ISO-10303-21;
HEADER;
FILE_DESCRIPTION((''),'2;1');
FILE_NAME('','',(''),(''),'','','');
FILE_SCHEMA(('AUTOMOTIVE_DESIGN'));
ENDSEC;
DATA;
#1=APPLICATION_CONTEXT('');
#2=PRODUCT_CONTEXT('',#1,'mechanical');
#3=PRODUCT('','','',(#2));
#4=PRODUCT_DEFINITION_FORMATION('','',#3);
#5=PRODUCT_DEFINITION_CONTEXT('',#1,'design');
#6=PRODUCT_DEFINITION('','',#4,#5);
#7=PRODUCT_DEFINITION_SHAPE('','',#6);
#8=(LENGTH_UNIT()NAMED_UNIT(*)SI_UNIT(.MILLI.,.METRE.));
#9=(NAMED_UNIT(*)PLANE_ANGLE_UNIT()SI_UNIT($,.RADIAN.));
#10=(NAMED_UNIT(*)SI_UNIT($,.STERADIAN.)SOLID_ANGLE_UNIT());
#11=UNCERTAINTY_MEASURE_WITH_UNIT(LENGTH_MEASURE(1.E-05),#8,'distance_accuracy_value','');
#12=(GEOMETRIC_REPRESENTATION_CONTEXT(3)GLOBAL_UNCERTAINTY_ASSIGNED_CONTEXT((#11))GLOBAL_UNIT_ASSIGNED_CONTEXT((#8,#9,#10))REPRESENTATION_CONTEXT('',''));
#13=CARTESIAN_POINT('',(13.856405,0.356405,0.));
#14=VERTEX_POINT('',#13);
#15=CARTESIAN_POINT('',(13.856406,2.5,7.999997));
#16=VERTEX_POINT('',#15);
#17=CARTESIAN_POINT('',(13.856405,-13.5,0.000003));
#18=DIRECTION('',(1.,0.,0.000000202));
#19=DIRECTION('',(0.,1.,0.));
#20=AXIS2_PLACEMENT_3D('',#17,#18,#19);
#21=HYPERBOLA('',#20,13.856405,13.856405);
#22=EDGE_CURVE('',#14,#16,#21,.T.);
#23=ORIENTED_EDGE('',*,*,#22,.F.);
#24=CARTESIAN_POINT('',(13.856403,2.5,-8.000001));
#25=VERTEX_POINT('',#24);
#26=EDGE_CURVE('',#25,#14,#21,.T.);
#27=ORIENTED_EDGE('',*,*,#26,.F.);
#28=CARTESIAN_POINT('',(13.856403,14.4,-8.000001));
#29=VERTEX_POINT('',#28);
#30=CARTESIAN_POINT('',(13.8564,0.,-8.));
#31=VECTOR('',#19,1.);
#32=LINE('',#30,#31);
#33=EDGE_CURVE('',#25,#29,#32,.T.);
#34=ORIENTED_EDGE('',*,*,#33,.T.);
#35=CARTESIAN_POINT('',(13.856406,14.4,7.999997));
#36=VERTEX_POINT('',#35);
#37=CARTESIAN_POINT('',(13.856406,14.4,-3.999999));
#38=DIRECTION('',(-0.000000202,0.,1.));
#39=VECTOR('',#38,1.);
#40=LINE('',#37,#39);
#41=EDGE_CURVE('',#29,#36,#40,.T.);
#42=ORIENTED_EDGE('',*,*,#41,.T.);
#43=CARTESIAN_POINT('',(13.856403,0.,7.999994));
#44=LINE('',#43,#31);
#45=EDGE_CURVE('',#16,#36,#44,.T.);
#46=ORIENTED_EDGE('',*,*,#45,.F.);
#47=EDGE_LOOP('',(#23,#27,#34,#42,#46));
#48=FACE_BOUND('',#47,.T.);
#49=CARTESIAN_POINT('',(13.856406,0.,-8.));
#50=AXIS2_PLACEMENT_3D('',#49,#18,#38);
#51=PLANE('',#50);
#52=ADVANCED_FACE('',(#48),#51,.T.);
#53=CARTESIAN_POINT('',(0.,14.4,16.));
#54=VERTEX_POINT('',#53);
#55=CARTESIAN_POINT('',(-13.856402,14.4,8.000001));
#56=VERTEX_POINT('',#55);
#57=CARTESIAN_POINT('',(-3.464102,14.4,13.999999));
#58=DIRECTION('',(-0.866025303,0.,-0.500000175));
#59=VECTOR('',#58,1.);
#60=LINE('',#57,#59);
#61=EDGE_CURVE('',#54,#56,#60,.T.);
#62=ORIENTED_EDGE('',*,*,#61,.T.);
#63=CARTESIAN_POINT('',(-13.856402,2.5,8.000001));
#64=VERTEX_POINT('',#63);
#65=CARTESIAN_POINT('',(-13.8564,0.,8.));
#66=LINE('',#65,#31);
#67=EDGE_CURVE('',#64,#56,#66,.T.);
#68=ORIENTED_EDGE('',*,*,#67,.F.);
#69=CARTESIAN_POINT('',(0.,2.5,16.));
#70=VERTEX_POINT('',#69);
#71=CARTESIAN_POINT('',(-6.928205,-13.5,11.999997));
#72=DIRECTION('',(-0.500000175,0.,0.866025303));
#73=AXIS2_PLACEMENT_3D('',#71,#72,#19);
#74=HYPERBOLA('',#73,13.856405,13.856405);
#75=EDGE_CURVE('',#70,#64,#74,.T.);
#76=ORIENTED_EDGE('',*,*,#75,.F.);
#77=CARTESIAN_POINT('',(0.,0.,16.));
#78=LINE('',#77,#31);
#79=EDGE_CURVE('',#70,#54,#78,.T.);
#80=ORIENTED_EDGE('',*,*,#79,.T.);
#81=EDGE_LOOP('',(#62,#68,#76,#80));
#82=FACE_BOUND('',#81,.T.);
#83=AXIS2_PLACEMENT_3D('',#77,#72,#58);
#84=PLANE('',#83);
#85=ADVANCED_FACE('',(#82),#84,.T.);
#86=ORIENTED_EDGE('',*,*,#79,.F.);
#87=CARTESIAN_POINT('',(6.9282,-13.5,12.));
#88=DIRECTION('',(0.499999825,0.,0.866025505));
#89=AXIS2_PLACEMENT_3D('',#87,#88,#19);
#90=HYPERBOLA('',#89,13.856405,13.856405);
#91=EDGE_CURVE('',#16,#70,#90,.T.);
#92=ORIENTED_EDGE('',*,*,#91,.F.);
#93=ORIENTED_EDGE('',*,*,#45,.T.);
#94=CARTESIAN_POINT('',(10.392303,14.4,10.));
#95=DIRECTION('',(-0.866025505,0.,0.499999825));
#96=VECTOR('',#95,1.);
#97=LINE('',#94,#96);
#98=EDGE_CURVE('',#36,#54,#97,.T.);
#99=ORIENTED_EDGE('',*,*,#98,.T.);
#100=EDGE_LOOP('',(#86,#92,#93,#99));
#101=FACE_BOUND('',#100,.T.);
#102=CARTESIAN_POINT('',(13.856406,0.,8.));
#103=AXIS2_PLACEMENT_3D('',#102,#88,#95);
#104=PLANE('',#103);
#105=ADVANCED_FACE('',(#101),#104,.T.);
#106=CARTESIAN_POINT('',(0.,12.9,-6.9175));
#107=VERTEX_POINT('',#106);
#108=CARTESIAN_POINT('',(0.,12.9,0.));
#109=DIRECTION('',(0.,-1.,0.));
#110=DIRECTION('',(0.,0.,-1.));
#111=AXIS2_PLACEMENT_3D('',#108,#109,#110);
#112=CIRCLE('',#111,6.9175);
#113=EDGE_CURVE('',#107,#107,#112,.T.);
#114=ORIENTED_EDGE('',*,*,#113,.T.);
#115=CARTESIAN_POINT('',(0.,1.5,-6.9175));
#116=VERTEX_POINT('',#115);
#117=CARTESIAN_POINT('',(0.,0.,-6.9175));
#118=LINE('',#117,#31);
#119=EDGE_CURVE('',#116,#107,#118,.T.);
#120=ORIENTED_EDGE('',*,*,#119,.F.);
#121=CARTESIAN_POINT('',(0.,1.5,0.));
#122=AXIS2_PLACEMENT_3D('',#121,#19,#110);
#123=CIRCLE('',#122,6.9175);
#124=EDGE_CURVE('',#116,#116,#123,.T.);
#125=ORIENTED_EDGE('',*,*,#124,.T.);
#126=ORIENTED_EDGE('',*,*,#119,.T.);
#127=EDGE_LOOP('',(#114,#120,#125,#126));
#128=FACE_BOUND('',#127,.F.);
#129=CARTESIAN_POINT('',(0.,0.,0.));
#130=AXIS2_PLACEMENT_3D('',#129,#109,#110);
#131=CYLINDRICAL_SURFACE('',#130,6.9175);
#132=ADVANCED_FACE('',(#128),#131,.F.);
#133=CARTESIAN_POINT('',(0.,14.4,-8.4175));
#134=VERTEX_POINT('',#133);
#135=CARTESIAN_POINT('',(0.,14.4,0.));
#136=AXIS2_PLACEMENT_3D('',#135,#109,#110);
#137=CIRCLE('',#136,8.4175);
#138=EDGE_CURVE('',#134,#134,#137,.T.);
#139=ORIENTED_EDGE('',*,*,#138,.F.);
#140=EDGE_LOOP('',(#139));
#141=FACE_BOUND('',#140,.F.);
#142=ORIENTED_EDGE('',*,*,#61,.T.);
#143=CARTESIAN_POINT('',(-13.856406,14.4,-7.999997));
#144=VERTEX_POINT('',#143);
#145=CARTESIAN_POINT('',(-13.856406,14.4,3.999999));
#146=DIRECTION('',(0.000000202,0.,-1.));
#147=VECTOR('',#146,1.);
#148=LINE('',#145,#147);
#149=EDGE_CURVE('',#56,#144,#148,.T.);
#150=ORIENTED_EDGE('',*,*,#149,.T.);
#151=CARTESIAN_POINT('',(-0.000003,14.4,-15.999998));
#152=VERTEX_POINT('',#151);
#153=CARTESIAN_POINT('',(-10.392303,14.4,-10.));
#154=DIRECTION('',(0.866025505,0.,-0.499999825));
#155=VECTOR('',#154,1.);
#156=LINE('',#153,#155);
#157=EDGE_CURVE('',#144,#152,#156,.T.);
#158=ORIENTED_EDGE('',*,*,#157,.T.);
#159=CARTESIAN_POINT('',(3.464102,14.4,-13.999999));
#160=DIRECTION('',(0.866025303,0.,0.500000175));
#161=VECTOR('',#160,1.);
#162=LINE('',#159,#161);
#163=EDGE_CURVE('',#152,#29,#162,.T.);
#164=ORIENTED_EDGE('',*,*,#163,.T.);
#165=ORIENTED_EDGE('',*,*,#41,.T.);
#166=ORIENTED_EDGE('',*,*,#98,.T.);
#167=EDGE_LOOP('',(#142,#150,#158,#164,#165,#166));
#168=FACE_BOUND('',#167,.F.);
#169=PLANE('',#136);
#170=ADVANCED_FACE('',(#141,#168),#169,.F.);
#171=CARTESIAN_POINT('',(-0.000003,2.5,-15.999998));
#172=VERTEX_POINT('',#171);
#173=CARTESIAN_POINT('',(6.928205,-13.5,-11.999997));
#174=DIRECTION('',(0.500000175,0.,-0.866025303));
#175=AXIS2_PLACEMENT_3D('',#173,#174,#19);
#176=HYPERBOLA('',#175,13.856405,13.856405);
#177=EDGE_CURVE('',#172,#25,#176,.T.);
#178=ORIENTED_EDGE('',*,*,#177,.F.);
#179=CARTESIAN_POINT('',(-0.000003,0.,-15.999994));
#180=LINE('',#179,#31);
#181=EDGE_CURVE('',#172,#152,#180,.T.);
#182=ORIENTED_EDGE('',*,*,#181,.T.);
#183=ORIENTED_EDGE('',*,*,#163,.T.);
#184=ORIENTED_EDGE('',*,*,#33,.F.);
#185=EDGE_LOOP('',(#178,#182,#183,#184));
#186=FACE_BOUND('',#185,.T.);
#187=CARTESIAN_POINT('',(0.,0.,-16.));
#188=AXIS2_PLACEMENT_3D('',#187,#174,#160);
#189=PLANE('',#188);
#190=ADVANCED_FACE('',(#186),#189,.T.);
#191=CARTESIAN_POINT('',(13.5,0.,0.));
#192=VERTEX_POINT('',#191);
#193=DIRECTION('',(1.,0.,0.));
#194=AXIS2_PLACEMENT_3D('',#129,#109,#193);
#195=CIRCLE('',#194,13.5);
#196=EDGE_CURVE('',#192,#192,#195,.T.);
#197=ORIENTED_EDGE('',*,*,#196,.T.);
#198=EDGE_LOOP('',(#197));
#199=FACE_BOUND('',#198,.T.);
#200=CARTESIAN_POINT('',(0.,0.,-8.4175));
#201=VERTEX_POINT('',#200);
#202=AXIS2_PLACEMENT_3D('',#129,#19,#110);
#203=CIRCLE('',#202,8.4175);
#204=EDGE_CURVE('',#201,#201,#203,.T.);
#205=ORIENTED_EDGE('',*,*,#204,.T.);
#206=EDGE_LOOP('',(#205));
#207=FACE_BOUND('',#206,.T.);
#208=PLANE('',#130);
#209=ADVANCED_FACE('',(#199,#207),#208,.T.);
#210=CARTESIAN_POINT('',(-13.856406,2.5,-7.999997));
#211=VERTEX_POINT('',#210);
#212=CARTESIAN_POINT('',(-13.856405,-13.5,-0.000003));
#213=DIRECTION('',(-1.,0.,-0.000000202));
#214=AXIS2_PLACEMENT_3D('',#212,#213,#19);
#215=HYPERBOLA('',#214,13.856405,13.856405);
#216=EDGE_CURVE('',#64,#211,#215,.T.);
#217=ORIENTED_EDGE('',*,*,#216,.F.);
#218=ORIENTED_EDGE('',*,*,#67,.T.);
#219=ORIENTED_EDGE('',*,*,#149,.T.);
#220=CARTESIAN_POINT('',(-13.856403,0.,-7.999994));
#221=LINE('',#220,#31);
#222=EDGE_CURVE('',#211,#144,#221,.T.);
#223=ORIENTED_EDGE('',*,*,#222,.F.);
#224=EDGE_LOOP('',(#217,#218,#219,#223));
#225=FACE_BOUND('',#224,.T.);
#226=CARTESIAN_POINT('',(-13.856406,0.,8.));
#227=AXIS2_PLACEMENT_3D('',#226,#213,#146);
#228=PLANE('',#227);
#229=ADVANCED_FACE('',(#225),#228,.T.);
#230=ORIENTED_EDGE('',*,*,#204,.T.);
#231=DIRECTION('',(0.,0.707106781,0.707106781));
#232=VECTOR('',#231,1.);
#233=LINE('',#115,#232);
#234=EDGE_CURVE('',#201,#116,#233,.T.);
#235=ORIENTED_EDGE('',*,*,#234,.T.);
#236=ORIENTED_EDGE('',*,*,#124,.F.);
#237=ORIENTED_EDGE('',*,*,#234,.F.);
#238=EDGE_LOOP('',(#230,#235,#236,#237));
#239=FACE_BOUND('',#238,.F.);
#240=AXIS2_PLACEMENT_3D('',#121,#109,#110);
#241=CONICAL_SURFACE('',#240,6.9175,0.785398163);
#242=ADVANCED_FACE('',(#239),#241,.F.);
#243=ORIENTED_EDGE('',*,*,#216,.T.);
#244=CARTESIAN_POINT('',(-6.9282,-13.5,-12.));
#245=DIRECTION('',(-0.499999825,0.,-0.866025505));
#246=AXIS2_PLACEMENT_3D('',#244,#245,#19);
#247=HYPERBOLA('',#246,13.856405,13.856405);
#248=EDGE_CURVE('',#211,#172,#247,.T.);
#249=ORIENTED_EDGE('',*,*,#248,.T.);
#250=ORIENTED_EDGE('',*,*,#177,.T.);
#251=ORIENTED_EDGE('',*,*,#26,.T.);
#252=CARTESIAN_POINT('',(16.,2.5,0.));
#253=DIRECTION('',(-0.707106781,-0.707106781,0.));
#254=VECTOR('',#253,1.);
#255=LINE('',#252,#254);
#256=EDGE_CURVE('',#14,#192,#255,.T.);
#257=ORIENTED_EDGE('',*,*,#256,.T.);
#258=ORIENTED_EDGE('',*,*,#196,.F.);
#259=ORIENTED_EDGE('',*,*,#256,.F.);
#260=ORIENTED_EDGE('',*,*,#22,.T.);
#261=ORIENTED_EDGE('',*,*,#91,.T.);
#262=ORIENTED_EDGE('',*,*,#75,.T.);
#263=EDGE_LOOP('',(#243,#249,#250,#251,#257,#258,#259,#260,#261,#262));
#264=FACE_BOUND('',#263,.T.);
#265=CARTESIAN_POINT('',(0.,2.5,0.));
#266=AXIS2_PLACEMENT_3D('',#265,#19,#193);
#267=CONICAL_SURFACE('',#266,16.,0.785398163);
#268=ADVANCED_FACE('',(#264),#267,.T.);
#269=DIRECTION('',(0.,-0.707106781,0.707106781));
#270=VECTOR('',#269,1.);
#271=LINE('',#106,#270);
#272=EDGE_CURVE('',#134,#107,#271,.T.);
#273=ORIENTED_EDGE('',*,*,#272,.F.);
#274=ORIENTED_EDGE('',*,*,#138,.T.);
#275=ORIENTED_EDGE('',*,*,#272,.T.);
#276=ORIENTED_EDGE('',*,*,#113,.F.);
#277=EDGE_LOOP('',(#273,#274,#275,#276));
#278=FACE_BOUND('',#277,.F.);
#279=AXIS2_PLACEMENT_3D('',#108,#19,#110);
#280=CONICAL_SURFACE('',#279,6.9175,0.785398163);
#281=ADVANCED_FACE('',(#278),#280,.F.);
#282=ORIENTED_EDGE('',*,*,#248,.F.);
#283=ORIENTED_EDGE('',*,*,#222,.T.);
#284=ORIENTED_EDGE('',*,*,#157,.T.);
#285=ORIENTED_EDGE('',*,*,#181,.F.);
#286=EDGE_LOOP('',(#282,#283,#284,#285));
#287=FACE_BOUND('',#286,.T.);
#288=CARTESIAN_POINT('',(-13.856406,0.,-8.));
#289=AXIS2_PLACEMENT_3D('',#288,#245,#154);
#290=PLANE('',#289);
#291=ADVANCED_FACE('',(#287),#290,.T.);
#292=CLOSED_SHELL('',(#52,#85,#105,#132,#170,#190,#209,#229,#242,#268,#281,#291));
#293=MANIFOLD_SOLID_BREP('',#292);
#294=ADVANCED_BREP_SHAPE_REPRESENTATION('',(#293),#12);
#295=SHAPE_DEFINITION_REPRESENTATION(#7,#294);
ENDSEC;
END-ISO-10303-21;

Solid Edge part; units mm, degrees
sketch "Sketch1" plane through (0, 0, 0) normal (0, -1, 0) x (1, 0, 0)
  circle A0 centre (0, 0) radius 16
extrude "Protrusion1" add sketch "Sketch1" against normal blind 14.4
chamfer "v_2" distance 2.5 angle 45 1 edges at (-16, 0, 0)
hole "Hole_1" at (0, 0, 0) direction (0, 1, 0) diameter 13.835 end up to next
chamfer "Chamfer_2" distance 1.5 angle 45 2 edges at (-6.9175, 0, 0) (0, 14.4, -6.9175)
sketch "Sketch2" plane through (0, 0, 0) normal (0, -1, 0) x (1, 0, 0)
  line L0 (0, 16) -> (-13.8564, 8)
extrude "ExtrudedCutout_1" cut sketch "Sketch2" against normal blind 70.3943 material side at (-6.9532, 0, 12.0433)
pattern_circular "Pattern1" count 6 over 360 about axis through (0, 0, 0) along (0, -1, 0) of "ExtrudedCutout_1"
